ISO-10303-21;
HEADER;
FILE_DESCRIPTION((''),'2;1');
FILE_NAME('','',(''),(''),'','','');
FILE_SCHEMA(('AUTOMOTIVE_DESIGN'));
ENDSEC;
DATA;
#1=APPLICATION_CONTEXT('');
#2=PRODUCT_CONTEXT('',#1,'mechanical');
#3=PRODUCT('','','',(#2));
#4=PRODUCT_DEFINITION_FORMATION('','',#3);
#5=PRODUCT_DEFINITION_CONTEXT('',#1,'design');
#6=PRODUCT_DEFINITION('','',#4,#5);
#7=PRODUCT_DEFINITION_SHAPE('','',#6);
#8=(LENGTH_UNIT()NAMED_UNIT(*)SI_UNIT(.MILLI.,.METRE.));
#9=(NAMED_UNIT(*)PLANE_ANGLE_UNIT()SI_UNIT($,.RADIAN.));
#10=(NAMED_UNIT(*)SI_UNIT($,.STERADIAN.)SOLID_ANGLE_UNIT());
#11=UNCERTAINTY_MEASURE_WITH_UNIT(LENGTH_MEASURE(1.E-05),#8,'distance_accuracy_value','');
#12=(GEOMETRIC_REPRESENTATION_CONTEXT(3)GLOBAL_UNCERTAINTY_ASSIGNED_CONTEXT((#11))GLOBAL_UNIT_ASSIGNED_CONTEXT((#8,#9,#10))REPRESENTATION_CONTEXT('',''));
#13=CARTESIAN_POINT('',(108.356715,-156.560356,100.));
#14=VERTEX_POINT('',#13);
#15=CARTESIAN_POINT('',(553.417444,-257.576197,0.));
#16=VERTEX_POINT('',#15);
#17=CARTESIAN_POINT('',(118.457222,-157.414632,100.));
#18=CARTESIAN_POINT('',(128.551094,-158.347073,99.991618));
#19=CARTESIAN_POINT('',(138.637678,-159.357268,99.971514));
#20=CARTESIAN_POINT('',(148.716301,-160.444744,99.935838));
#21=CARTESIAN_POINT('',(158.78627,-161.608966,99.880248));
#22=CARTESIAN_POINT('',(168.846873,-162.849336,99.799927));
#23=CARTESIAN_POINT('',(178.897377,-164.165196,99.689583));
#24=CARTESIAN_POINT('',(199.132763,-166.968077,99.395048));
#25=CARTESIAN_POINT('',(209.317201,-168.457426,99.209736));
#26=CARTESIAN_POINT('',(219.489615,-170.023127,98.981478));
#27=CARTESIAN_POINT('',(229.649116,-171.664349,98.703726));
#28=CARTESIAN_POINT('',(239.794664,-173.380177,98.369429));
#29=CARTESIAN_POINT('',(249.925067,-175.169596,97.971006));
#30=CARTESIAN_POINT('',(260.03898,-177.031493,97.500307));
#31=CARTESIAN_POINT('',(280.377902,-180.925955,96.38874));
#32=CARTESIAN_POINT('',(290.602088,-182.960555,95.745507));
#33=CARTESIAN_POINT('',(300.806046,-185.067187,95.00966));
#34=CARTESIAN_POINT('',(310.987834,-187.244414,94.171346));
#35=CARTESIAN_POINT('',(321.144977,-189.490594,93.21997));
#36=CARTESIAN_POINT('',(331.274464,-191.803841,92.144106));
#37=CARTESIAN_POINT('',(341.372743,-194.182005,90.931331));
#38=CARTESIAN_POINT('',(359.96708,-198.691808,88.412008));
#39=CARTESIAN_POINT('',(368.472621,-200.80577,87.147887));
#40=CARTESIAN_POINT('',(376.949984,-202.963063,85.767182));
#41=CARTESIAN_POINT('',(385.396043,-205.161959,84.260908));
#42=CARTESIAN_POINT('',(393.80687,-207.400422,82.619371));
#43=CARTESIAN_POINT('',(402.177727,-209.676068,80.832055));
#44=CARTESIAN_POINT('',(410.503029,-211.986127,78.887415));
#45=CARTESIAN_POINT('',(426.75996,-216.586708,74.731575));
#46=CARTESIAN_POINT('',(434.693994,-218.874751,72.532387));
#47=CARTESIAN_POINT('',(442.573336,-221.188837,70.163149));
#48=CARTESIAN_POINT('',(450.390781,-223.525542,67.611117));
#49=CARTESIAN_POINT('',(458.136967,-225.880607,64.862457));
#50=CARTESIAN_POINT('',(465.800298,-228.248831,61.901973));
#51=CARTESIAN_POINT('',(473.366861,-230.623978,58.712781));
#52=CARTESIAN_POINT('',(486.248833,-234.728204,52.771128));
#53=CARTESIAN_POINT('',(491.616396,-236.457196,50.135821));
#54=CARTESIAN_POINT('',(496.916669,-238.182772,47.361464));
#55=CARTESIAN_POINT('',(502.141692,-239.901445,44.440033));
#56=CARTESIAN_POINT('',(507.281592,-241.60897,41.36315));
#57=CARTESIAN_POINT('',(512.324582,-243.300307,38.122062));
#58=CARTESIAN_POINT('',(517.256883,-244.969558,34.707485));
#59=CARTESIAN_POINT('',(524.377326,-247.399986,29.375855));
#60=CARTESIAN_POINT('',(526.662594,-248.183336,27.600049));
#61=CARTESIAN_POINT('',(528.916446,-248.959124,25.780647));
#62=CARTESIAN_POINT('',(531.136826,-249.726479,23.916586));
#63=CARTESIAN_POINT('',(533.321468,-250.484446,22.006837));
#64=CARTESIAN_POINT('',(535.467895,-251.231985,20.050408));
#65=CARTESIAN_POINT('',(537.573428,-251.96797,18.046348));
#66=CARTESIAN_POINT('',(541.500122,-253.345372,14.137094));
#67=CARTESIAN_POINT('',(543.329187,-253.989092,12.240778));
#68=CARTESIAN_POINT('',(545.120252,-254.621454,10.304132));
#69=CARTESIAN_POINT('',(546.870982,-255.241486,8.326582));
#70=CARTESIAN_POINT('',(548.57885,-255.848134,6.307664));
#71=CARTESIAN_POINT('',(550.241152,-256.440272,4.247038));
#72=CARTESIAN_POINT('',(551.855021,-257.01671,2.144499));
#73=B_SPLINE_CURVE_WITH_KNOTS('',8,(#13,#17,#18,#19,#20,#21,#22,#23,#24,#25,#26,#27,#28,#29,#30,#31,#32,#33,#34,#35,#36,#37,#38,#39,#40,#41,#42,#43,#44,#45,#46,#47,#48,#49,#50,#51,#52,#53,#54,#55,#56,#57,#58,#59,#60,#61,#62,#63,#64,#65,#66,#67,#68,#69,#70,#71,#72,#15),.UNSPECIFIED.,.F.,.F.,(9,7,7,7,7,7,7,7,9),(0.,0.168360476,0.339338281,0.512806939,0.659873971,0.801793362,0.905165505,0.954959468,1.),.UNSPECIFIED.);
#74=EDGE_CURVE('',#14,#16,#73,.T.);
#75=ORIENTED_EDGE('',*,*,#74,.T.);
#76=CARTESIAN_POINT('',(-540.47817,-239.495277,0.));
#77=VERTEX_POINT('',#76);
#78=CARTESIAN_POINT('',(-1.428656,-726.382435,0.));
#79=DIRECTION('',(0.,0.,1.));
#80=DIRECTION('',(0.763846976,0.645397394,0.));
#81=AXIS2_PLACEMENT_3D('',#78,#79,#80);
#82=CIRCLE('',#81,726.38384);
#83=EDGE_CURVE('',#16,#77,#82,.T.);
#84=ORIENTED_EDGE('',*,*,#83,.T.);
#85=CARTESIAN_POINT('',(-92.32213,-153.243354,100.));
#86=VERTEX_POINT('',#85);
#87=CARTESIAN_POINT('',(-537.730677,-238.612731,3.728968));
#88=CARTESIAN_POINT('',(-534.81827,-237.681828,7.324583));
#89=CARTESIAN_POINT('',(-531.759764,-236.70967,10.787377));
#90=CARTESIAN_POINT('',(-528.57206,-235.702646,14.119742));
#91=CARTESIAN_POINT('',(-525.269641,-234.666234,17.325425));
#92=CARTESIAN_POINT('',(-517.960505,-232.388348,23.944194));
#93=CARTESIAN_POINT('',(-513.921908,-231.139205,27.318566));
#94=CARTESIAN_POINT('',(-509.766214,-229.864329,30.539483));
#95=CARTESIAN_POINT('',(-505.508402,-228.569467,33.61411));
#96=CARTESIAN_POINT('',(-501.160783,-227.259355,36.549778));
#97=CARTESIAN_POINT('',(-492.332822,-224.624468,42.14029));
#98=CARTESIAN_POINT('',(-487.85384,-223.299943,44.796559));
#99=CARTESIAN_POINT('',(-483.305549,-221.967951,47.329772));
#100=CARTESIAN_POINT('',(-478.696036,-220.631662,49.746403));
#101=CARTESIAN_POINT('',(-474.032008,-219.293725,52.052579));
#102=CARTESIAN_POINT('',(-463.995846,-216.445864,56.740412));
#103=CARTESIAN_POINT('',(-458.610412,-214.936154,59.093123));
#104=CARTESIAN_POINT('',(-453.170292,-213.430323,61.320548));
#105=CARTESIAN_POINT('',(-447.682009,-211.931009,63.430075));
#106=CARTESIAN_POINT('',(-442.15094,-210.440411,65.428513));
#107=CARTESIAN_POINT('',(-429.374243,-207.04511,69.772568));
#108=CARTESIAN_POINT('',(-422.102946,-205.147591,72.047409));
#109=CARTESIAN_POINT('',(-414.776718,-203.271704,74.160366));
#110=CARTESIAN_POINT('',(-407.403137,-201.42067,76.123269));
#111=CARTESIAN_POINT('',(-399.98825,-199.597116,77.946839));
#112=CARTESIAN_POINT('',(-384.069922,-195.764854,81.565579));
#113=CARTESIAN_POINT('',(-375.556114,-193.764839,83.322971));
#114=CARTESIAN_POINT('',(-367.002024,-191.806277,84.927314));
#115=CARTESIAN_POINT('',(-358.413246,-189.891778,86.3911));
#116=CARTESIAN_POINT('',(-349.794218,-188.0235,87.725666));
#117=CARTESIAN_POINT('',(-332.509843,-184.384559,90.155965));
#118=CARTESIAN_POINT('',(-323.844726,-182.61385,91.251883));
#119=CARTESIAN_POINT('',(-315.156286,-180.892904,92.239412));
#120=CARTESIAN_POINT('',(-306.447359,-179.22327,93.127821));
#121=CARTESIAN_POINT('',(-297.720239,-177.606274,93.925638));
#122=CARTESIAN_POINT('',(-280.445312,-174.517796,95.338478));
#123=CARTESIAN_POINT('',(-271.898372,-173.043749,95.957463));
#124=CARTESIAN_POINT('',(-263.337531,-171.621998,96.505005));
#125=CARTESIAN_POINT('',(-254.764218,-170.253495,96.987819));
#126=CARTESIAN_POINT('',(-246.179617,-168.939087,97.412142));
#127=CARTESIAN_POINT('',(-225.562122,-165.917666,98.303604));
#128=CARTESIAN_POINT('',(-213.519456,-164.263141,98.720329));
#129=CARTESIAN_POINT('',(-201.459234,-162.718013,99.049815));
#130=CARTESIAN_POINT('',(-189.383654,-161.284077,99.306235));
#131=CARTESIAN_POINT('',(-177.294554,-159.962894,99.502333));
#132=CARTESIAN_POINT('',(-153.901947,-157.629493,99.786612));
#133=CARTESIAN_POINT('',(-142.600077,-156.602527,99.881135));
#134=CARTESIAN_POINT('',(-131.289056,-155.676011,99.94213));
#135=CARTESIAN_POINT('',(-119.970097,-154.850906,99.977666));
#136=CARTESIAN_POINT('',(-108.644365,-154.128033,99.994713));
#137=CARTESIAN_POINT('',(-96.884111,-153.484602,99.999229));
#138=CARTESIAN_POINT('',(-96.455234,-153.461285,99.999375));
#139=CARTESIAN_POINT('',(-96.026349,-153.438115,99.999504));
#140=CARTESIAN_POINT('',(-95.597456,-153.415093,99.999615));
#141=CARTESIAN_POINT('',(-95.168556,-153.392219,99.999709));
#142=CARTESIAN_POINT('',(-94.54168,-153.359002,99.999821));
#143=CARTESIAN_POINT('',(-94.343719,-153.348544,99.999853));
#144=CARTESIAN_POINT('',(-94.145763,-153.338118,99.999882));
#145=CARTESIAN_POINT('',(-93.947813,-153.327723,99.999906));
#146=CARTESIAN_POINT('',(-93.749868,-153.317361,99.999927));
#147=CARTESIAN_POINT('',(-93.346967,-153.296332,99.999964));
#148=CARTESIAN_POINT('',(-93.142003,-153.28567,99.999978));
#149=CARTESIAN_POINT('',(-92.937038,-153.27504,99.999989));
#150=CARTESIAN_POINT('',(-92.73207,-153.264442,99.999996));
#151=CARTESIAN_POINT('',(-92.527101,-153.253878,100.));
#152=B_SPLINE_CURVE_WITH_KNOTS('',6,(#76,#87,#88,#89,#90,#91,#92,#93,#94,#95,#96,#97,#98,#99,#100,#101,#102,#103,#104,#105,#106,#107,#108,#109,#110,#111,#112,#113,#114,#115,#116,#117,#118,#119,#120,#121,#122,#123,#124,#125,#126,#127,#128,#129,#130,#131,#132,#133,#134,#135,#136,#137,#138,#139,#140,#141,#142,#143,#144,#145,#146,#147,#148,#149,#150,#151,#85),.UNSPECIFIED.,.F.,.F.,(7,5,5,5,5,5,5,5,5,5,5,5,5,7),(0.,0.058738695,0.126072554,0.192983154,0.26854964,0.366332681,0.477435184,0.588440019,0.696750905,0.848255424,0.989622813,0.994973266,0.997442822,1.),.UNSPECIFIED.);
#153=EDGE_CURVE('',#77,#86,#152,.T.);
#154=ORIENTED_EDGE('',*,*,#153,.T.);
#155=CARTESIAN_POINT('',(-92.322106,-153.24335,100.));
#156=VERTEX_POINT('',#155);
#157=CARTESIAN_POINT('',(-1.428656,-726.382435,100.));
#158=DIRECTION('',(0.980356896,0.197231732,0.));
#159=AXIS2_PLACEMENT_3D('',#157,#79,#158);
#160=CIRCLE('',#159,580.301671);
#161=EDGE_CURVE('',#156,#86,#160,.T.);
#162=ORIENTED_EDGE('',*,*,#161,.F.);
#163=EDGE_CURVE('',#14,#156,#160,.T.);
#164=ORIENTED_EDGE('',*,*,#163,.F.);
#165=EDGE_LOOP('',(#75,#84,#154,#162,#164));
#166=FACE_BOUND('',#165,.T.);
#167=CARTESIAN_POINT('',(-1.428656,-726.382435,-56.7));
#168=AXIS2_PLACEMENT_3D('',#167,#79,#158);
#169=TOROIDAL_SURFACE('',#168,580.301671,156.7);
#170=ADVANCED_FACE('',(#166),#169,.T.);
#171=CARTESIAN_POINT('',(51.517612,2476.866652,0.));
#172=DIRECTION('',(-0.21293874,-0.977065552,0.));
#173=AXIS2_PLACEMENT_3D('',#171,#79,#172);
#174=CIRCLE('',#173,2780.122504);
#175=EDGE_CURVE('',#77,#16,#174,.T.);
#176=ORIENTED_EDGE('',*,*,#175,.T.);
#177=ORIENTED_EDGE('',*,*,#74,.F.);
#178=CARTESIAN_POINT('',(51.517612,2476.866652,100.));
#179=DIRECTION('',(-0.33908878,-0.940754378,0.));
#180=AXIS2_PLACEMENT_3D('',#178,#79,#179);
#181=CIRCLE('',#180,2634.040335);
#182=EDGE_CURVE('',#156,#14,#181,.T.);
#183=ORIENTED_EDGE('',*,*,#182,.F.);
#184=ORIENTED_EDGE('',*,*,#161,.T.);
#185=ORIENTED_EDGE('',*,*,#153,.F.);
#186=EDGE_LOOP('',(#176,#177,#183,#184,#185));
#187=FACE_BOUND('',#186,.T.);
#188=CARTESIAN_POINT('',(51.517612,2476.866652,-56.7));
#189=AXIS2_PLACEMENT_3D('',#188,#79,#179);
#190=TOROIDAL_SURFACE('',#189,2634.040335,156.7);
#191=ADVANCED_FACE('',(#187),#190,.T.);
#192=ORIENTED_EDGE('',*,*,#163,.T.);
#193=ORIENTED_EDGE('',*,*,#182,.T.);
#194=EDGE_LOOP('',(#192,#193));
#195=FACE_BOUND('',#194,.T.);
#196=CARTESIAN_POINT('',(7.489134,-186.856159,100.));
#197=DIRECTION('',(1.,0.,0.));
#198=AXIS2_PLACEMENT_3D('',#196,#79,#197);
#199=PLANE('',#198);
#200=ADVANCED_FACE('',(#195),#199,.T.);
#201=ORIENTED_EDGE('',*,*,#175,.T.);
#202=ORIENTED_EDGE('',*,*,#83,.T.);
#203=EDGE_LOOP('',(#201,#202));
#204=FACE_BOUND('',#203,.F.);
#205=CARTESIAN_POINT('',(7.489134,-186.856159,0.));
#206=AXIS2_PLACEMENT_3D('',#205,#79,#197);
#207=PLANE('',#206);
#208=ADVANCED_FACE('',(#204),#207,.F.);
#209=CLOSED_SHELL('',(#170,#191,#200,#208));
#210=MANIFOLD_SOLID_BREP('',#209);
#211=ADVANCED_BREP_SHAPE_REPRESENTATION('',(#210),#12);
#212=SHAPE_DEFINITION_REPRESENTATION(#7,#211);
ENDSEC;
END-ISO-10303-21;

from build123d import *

# Parameters (mm, degrees)
F1_DEPTH    = 100
F2_T2_ANGLE = 37.7488316787
F2_T4_ANGLE = 155.3558475239


# Not quite as in the source:
# - a fillet or chamfer that OpenCascade refuses, or shapes differently, is made with other operations: its cross-section is extruded or revolved along the edge and cut away or added


with BuildPart() as f1:
    # F0 (on Top) → F1 (new body)
    with BuildSketch(Plane.XY):
        with BuildLine():
            ThreePointArc((-540.4781699181, -239.4952774048), (5.5714483543, -302.8761576492), (553.4174442291, -257.5761973858))
            ThreePointArc((553.4174442291, -257.5761973858), (10.5760494997, -0.097800723), (-540.4781699181, -239.4952774048))
        make_face()
    extrude(amount=F1_DEPTH)

    # F2: fillet of radius 156.7 on 2 edges, made by hand

    # F2_s1 → F2_t2 (revolve, cut)
    with BuildSketch(Plane(origin=(-744.5245583311, 268.3590209284, 0), x_dir=(0, 0, 1), z_dir=(-0.9407543779, 0.3390887795, 0))):
        with BuildLine():
            ThreePointArc((0, -432.5303133462), (72.6054136531, -374.9636800472), (100, -286.4481446876))
            Line((100, -286.4481446876), (100, -432.5303133462))
            Line((100, -432.5303133462), (0, -432.5303133462))
        make_face()
    revolve(axis=Axis((51.517612373, 2476.8666518852, 100), (0, 0, 1)), revolution_arc=F2_T2_ANGLE, mode=Mode.SUBTRACT)

    # F2_s3 → F2_t4 (revolve, cut)
    with BuildSketch(Plane(origin=(140.3959083331, -697.8496584538, 0), x_dir=(0, 0, 1), z_dir=(0.1972317322, -0.9803568961, 0))):
        with BuildLine():
            ThreePointArc((0, -581.717581759), (72.6054136531, -524.15094846), (100, -435.6354131004))
            Line((100, -435.6354131004), (100, -581.717581759))
            Line((100, -581.717581759), (0, -581.717581759))
        make_face()
    revolve(axis=Axis((-1.4286556925, -726.382435176, 100), (0, 0, 1)), revolution_arc=F2_T4_ANGLE, mode=Mode.SUBTRACT)


solid = f1.part
